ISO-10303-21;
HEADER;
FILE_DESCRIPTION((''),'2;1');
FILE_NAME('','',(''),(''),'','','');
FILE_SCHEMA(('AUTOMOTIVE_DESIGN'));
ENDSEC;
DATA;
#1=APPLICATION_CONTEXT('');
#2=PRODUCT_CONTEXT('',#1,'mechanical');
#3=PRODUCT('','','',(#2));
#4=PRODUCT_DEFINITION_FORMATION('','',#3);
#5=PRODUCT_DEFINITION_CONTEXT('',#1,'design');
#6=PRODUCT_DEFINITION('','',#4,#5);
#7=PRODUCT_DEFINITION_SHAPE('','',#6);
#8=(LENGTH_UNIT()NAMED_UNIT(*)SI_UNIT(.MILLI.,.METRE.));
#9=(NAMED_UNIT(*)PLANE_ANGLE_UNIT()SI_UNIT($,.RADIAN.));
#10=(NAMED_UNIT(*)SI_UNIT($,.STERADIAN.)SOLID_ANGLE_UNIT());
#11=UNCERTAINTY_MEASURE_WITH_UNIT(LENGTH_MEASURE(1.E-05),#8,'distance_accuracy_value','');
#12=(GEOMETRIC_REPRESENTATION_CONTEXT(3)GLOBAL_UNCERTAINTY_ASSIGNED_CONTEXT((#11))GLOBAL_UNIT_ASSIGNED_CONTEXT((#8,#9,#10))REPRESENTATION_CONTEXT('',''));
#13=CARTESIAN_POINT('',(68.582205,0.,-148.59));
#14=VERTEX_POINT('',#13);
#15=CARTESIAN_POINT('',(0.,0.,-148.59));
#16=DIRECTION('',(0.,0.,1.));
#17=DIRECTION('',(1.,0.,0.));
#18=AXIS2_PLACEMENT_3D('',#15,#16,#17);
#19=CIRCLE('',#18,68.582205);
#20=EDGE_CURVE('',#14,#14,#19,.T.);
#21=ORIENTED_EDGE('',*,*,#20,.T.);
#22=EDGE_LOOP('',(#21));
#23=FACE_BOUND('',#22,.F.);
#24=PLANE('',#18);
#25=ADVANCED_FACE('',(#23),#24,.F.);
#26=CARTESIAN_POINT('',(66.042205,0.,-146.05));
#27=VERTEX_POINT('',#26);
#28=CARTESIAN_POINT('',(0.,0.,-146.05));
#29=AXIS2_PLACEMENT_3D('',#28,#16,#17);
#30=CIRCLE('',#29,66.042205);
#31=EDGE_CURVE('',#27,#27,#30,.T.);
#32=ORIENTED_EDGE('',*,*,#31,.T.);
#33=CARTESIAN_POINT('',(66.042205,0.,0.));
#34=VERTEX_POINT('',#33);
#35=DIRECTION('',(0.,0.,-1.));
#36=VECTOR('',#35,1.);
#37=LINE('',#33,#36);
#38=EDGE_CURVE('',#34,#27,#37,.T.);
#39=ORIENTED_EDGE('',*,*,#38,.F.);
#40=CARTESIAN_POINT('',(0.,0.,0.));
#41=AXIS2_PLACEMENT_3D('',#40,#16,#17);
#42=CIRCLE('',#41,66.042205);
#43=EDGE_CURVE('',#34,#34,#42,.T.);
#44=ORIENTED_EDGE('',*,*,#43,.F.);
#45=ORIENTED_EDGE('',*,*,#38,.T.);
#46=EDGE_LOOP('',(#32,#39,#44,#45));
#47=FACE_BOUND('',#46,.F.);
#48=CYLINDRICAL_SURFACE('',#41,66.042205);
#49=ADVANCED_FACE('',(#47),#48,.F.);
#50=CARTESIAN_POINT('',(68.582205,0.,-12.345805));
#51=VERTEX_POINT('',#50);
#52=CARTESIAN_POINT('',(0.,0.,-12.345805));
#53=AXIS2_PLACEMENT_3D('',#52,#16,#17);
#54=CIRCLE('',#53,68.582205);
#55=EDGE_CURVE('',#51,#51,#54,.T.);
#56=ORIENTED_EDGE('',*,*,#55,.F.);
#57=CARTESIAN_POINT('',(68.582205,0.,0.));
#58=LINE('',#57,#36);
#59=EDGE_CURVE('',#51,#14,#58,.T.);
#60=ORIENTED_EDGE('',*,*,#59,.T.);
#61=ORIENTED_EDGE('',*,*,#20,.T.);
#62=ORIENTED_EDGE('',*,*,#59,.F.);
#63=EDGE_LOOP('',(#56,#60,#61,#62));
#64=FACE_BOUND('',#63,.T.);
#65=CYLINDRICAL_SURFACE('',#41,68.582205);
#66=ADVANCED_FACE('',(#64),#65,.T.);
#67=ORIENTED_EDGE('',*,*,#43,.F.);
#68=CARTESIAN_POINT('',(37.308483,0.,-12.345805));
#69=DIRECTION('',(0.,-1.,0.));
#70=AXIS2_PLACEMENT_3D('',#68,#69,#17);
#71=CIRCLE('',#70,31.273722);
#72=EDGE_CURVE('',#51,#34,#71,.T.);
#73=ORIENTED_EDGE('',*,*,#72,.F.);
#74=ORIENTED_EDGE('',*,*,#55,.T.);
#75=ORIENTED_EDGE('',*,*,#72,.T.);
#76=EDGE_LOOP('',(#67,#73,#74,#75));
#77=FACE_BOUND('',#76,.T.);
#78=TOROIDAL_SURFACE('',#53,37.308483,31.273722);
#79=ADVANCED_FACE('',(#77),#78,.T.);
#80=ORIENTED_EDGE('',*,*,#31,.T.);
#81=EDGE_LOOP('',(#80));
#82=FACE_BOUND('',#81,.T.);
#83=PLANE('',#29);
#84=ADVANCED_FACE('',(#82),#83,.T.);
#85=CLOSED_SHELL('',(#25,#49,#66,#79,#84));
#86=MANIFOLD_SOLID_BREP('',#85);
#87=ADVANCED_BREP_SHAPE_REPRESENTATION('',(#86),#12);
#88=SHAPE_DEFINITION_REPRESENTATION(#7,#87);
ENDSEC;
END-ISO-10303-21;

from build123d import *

# Parameters (mm, degrees)
F0_R     = 68.5822054127
F1_DEPTH = 148.59
F2_T     = -2.54


# Not quite as in the source:
# - a fillet or chamfer that OpenCascade refuses, or shapes differently, is made with other operations: its cross-section is extruded or revolved along the edge and cut away or added


with BuildPart() as f1:
    # F0 (on Top) → F1 (new body)
    with BuildSketch(Plane.XY):
        Circle(F0_R)
    extrude(amount=-F1_DEPTH)

    # F2
    f2_openings = [f1.faces().sort_by_distance(p)[0] for p in [
        (0, 0, 0),
    ]]
    offset(amount=F2_T, openings=f2_openings)

    # F3: fillet of radius 31.273722487 on 1 edges, made by hand

    # F3_s1 → F3_t2 (revolve, cut)
    with BuildSketch(Plane.XZ):
        with BuildLine():
            ThreePointArc((68.5822054127, -12.34580537), (67.9406243892, -6.0436130881), (66.0422054127, 0))
            Line((66.0422054127, 0), (66.6168798625, 0.2469161074))
            ThreePointArc((66.6168798625, 0.2469161074), (67.3122054127, 0.6254744497), (68.5822054127, 0.6254744497))
            Line((68.5822054127, 0.6254744497), (69.2076798625, 0))
            Line((69.2076798625, 0), (69.2076798625, -12.34580537))
            Line((69.2076798625, -12.34580537), (68.5822054127, -12.34580537))
        make_face()
    revolve(axis=Axis((0, 0, 0), (0, 0, 1)), mode=Mode.SUBTRACT)


solid = f1.part
